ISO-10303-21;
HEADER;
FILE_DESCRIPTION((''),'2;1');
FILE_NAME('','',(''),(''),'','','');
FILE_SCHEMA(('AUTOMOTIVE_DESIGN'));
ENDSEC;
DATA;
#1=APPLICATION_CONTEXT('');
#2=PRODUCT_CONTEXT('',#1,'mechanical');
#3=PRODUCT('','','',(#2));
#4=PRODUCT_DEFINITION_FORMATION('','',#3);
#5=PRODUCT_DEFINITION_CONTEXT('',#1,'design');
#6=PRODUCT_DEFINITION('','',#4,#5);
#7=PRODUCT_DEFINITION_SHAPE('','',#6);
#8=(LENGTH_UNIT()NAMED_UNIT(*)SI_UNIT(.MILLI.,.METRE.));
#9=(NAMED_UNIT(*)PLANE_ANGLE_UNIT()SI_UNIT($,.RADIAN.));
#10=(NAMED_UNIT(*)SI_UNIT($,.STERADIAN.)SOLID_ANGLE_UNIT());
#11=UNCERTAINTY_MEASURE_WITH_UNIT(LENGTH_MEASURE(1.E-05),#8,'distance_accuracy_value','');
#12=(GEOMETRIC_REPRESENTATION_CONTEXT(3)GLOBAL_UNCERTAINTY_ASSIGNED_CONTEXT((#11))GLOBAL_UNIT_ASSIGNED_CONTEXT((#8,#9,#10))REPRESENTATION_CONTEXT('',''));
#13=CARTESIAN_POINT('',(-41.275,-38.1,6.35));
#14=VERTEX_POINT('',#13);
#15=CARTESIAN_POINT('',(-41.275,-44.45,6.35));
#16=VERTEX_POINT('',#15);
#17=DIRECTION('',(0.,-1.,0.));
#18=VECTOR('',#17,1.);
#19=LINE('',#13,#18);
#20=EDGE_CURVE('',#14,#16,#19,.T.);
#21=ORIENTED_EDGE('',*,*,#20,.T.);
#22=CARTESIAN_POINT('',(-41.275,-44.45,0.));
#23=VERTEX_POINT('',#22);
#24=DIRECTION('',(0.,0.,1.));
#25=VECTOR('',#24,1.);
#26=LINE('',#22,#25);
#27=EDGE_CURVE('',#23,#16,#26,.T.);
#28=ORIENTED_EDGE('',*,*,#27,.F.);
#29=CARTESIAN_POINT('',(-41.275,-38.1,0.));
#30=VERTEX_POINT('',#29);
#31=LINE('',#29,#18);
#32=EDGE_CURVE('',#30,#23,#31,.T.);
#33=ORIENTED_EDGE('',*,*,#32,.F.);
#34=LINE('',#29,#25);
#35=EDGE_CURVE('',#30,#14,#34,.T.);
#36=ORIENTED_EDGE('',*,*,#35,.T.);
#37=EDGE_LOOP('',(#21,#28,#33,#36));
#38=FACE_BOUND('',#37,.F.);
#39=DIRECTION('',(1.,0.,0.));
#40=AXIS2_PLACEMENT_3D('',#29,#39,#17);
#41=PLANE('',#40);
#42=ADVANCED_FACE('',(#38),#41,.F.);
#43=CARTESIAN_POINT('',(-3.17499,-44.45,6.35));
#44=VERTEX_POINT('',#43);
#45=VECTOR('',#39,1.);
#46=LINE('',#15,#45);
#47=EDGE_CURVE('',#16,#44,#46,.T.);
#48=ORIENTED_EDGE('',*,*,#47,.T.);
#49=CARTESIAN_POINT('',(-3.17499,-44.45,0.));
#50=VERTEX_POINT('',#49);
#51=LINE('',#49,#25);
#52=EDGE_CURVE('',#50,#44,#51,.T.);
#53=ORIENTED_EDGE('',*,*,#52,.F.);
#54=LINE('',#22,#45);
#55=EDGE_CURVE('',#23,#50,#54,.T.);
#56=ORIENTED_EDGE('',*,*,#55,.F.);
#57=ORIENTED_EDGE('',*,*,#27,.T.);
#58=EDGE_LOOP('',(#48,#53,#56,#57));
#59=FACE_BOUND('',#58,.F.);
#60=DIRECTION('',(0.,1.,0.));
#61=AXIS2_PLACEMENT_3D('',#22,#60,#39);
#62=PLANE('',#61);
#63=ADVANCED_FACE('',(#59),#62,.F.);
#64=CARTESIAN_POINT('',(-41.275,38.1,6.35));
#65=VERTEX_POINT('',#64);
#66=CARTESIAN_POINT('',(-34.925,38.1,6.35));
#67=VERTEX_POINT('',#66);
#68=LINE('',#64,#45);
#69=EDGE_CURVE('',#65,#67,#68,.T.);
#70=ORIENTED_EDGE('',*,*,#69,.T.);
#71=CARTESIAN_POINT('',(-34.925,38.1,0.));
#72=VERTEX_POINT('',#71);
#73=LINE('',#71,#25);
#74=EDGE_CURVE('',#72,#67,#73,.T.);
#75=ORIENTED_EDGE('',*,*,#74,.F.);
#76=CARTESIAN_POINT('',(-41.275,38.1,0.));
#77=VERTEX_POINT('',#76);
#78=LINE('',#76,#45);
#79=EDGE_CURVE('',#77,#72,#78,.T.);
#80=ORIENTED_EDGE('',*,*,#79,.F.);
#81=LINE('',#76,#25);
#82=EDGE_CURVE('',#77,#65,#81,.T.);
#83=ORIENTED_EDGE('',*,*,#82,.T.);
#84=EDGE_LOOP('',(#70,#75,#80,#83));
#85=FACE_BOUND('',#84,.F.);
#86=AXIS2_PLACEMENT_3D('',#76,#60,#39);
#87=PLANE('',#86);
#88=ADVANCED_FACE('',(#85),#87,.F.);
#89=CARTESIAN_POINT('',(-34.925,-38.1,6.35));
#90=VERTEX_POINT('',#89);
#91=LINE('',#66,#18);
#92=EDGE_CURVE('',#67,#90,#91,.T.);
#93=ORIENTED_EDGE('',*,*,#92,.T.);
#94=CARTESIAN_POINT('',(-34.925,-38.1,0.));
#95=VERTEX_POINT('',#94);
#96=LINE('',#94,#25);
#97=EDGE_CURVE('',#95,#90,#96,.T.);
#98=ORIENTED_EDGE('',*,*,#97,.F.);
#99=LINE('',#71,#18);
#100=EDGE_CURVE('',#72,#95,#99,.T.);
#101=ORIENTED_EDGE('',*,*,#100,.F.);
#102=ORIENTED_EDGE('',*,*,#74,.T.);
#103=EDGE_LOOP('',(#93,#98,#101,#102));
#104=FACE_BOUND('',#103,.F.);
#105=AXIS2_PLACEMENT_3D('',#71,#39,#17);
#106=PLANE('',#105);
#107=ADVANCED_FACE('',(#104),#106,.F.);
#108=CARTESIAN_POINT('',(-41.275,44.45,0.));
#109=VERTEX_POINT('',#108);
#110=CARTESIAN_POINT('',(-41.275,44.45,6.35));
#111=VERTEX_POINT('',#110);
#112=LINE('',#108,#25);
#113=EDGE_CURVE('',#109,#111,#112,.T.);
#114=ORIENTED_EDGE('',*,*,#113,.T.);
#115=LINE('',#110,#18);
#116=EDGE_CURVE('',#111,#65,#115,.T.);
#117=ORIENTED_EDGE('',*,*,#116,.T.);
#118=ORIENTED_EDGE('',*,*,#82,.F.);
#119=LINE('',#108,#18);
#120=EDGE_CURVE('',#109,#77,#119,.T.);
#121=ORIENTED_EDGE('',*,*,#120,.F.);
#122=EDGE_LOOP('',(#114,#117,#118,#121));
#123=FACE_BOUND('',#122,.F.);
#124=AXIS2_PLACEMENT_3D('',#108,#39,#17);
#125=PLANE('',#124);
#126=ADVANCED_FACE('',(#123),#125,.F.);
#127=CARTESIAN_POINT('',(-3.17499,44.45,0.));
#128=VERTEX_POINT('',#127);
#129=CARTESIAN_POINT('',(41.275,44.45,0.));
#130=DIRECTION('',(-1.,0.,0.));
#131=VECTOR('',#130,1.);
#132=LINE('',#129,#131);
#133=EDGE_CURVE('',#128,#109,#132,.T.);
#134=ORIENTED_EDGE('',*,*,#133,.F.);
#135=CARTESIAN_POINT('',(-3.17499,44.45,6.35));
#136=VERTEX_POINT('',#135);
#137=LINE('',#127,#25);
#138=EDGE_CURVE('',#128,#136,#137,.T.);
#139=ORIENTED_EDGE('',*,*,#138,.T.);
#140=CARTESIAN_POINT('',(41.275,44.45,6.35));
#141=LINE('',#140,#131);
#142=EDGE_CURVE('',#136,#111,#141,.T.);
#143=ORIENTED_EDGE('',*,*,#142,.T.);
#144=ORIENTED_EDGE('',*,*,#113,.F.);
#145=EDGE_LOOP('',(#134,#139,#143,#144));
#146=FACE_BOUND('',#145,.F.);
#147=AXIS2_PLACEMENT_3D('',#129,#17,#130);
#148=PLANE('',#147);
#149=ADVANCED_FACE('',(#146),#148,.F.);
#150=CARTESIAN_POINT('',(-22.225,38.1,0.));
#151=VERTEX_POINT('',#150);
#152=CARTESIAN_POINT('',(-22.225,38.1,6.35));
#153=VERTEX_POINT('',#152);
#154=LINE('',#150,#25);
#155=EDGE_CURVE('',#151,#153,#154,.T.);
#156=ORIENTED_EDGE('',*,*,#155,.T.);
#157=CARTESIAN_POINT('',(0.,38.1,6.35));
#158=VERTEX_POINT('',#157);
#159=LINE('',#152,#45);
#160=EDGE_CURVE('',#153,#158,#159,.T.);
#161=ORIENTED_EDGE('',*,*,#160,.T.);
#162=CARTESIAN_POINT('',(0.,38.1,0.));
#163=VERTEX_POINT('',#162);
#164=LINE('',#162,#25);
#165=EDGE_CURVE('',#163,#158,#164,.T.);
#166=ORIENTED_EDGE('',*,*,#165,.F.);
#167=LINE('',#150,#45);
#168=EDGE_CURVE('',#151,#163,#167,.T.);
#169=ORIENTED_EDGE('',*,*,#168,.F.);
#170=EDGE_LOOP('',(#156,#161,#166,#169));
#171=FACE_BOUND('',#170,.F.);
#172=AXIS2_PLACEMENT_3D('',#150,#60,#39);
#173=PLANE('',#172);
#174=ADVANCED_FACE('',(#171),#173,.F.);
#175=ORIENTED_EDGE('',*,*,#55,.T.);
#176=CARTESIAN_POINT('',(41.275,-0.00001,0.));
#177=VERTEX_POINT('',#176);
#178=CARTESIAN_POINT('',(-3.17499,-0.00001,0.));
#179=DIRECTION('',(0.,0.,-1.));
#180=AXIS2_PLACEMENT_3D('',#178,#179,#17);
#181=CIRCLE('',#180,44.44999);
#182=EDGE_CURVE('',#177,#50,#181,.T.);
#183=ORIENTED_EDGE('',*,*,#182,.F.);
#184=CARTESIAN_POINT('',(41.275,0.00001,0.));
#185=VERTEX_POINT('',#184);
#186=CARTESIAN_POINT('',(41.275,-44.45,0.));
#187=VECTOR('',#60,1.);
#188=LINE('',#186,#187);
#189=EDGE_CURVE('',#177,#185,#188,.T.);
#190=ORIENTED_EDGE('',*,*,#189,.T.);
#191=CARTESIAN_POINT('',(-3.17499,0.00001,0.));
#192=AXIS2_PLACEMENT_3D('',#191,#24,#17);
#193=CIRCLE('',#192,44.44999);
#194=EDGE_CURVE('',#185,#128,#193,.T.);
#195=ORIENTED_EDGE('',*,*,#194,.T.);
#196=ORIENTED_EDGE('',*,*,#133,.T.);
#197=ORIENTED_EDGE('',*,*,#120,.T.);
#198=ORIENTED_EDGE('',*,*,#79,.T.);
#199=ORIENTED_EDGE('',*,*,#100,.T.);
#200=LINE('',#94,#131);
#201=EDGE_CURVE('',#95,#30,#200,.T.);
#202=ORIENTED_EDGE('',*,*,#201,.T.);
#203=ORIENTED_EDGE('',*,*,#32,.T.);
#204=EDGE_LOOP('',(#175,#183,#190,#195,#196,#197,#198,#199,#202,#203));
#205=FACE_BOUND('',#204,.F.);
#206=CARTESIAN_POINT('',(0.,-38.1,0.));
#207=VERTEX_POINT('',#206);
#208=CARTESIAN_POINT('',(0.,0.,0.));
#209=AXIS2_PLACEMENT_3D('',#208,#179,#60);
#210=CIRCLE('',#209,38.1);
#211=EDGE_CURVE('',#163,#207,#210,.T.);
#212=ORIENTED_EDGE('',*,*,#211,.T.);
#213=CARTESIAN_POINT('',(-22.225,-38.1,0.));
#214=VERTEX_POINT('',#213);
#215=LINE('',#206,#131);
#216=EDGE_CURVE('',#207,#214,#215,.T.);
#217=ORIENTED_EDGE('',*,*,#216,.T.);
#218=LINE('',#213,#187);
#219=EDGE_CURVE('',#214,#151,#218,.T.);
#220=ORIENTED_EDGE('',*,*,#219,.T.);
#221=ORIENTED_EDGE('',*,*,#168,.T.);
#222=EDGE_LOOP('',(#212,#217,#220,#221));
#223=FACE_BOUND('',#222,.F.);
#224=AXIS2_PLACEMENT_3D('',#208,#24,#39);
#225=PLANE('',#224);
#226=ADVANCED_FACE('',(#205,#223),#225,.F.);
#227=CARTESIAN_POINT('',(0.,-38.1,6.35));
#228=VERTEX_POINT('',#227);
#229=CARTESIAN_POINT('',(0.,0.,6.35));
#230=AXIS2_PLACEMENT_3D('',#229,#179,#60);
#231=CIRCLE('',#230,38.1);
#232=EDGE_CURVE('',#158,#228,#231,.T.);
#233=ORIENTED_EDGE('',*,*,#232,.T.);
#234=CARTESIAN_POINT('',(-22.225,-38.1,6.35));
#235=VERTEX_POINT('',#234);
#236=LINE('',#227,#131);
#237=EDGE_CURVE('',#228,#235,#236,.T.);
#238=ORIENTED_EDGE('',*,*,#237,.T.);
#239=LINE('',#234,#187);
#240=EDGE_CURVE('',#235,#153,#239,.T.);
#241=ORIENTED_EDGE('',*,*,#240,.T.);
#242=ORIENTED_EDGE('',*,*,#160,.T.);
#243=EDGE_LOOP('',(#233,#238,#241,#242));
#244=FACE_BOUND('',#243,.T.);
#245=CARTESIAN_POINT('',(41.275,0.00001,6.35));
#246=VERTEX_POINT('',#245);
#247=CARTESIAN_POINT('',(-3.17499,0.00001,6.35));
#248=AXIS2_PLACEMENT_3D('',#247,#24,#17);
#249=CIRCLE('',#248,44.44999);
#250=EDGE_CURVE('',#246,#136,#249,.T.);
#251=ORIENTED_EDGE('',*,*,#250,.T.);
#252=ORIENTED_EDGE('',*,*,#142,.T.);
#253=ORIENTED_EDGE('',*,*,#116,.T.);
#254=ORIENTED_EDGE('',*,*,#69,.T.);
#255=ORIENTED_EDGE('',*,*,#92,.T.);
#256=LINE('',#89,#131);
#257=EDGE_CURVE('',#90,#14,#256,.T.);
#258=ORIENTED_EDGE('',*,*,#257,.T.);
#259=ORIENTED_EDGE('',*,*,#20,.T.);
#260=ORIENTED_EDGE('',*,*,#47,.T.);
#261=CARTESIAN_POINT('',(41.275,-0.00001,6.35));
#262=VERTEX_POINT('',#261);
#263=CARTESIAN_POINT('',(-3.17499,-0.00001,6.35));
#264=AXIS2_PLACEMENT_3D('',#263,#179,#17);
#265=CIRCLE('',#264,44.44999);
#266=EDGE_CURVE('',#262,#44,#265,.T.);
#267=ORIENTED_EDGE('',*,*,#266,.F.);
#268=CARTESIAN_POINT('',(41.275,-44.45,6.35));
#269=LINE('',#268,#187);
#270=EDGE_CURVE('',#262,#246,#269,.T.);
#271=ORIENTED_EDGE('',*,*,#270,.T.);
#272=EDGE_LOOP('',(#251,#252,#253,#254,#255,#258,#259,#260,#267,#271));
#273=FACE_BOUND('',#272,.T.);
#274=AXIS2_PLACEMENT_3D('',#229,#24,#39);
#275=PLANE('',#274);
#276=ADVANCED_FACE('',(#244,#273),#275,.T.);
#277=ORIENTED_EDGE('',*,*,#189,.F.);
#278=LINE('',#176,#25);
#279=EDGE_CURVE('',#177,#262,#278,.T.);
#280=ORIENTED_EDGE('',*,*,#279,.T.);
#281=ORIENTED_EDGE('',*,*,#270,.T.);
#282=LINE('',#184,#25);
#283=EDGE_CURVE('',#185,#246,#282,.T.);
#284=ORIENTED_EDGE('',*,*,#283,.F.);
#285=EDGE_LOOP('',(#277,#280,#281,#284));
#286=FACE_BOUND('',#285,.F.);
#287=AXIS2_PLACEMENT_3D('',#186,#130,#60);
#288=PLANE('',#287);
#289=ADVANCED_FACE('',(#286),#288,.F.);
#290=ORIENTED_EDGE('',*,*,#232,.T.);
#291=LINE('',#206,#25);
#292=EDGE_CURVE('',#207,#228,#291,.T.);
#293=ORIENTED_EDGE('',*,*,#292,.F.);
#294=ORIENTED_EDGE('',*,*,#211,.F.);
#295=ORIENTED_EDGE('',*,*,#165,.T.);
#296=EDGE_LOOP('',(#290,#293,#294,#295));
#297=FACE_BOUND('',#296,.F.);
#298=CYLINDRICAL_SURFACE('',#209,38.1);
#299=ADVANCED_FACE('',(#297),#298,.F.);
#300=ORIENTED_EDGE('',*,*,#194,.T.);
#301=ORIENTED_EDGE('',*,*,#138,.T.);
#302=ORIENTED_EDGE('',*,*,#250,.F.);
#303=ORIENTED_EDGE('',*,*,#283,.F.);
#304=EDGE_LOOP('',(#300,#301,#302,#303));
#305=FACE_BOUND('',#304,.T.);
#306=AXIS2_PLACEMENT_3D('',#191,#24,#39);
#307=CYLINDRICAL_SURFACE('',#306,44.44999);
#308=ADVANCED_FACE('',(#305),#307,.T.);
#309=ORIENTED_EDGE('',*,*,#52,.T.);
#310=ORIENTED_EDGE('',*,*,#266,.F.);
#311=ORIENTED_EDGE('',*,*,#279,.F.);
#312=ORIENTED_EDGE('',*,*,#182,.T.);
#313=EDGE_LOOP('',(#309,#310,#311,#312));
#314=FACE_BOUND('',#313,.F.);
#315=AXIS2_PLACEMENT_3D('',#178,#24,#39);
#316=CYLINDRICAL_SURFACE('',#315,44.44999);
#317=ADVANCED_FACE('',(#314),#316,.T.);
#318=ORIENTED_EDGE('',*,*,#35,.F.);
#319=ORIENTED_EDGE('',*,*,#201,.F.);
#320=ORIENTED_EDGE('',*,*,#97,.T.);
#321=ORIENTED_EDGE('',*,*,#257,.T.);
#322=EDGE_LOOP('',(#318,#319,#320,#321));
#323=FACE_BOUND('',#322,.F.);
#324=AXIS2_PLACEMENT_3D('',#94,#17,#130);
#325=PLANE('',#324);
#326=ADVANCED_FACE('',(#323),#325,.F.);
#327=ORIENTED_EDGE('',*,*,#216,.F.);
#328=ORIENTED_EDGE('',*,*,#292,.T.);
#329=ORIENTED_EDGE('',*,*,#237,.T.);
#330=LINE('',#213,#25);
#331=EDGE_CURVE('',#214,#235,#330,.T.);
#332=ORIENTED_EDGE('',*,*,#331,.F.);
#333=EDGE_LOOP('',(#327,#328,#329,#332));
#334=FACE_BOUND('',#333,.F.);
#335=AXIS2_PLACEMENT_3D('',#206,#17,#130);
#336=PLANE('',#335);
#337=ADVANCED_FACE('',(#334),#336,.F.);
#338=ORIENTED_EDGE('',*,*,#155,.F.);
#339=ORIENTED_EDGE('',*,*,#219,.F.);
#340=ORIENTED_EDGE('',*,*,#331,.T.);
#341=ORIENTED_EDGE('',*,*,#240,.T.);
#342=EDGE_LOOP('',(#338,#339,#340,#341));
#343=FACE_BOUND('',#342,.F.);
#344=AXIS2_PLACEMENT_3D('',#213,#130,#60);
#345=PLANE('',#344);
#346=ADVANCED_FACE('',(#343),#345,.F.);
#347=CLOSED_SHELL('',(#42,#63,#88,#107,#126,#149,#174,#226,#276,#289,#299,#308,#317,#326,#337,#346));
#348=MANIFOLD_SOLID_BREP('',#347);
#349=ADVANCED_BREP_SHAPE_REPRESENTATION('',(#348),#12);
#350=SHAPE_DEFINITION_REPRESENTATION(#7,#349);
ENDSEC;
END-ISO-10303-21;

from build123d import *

# Parameters (mm, degrees)
F1_DEPTH = 6.35
F2_R     = 44.44999


# Not quite as in the source:
# - a fillet or chamfer is up to 0.001 mm smaller than in the source, because OpenCascade refuses the exact size


with BuildPart() as f1:
    # F0 (on Top) → F1 (new body)
    with BuildSketch(Plane.XY):
        Polygon((41.275, -44.45), (41.275, 44.45), (-41.275, 44.45), (-41.275, 38.1), (-34.925, 38.1), (-34.925, -38.1), (-41.275, -38.1), (-41.275, -44.45), align=None)
        with BuildLine():
            Line((0, -38.1), (-22.225, -38.1))
            Line((-22.225, -38.1), (-22.225, 38.1))
            Line((-22.225, 38.1), (0, 38.1))
            ThreePointArc((0, 38.1), (38.1, 0), (0, -38.1))
        make_face(mode=Mode.SUBTRACT)
    extrude(amount=F1_DEPTH)

    # F2 (radius 44.45 in the source; OpenCascade refuses exactly that, so slightly less here)
    f2_edges = [f1.edges().sort_by_distance(p)[0] for p in [
        (41.275, -44.45, 3.175),
        (41.275, 44.45, 3.175),
    ]]
    fillet(f2_edges, radius=F2_R)


solid = f1.part
